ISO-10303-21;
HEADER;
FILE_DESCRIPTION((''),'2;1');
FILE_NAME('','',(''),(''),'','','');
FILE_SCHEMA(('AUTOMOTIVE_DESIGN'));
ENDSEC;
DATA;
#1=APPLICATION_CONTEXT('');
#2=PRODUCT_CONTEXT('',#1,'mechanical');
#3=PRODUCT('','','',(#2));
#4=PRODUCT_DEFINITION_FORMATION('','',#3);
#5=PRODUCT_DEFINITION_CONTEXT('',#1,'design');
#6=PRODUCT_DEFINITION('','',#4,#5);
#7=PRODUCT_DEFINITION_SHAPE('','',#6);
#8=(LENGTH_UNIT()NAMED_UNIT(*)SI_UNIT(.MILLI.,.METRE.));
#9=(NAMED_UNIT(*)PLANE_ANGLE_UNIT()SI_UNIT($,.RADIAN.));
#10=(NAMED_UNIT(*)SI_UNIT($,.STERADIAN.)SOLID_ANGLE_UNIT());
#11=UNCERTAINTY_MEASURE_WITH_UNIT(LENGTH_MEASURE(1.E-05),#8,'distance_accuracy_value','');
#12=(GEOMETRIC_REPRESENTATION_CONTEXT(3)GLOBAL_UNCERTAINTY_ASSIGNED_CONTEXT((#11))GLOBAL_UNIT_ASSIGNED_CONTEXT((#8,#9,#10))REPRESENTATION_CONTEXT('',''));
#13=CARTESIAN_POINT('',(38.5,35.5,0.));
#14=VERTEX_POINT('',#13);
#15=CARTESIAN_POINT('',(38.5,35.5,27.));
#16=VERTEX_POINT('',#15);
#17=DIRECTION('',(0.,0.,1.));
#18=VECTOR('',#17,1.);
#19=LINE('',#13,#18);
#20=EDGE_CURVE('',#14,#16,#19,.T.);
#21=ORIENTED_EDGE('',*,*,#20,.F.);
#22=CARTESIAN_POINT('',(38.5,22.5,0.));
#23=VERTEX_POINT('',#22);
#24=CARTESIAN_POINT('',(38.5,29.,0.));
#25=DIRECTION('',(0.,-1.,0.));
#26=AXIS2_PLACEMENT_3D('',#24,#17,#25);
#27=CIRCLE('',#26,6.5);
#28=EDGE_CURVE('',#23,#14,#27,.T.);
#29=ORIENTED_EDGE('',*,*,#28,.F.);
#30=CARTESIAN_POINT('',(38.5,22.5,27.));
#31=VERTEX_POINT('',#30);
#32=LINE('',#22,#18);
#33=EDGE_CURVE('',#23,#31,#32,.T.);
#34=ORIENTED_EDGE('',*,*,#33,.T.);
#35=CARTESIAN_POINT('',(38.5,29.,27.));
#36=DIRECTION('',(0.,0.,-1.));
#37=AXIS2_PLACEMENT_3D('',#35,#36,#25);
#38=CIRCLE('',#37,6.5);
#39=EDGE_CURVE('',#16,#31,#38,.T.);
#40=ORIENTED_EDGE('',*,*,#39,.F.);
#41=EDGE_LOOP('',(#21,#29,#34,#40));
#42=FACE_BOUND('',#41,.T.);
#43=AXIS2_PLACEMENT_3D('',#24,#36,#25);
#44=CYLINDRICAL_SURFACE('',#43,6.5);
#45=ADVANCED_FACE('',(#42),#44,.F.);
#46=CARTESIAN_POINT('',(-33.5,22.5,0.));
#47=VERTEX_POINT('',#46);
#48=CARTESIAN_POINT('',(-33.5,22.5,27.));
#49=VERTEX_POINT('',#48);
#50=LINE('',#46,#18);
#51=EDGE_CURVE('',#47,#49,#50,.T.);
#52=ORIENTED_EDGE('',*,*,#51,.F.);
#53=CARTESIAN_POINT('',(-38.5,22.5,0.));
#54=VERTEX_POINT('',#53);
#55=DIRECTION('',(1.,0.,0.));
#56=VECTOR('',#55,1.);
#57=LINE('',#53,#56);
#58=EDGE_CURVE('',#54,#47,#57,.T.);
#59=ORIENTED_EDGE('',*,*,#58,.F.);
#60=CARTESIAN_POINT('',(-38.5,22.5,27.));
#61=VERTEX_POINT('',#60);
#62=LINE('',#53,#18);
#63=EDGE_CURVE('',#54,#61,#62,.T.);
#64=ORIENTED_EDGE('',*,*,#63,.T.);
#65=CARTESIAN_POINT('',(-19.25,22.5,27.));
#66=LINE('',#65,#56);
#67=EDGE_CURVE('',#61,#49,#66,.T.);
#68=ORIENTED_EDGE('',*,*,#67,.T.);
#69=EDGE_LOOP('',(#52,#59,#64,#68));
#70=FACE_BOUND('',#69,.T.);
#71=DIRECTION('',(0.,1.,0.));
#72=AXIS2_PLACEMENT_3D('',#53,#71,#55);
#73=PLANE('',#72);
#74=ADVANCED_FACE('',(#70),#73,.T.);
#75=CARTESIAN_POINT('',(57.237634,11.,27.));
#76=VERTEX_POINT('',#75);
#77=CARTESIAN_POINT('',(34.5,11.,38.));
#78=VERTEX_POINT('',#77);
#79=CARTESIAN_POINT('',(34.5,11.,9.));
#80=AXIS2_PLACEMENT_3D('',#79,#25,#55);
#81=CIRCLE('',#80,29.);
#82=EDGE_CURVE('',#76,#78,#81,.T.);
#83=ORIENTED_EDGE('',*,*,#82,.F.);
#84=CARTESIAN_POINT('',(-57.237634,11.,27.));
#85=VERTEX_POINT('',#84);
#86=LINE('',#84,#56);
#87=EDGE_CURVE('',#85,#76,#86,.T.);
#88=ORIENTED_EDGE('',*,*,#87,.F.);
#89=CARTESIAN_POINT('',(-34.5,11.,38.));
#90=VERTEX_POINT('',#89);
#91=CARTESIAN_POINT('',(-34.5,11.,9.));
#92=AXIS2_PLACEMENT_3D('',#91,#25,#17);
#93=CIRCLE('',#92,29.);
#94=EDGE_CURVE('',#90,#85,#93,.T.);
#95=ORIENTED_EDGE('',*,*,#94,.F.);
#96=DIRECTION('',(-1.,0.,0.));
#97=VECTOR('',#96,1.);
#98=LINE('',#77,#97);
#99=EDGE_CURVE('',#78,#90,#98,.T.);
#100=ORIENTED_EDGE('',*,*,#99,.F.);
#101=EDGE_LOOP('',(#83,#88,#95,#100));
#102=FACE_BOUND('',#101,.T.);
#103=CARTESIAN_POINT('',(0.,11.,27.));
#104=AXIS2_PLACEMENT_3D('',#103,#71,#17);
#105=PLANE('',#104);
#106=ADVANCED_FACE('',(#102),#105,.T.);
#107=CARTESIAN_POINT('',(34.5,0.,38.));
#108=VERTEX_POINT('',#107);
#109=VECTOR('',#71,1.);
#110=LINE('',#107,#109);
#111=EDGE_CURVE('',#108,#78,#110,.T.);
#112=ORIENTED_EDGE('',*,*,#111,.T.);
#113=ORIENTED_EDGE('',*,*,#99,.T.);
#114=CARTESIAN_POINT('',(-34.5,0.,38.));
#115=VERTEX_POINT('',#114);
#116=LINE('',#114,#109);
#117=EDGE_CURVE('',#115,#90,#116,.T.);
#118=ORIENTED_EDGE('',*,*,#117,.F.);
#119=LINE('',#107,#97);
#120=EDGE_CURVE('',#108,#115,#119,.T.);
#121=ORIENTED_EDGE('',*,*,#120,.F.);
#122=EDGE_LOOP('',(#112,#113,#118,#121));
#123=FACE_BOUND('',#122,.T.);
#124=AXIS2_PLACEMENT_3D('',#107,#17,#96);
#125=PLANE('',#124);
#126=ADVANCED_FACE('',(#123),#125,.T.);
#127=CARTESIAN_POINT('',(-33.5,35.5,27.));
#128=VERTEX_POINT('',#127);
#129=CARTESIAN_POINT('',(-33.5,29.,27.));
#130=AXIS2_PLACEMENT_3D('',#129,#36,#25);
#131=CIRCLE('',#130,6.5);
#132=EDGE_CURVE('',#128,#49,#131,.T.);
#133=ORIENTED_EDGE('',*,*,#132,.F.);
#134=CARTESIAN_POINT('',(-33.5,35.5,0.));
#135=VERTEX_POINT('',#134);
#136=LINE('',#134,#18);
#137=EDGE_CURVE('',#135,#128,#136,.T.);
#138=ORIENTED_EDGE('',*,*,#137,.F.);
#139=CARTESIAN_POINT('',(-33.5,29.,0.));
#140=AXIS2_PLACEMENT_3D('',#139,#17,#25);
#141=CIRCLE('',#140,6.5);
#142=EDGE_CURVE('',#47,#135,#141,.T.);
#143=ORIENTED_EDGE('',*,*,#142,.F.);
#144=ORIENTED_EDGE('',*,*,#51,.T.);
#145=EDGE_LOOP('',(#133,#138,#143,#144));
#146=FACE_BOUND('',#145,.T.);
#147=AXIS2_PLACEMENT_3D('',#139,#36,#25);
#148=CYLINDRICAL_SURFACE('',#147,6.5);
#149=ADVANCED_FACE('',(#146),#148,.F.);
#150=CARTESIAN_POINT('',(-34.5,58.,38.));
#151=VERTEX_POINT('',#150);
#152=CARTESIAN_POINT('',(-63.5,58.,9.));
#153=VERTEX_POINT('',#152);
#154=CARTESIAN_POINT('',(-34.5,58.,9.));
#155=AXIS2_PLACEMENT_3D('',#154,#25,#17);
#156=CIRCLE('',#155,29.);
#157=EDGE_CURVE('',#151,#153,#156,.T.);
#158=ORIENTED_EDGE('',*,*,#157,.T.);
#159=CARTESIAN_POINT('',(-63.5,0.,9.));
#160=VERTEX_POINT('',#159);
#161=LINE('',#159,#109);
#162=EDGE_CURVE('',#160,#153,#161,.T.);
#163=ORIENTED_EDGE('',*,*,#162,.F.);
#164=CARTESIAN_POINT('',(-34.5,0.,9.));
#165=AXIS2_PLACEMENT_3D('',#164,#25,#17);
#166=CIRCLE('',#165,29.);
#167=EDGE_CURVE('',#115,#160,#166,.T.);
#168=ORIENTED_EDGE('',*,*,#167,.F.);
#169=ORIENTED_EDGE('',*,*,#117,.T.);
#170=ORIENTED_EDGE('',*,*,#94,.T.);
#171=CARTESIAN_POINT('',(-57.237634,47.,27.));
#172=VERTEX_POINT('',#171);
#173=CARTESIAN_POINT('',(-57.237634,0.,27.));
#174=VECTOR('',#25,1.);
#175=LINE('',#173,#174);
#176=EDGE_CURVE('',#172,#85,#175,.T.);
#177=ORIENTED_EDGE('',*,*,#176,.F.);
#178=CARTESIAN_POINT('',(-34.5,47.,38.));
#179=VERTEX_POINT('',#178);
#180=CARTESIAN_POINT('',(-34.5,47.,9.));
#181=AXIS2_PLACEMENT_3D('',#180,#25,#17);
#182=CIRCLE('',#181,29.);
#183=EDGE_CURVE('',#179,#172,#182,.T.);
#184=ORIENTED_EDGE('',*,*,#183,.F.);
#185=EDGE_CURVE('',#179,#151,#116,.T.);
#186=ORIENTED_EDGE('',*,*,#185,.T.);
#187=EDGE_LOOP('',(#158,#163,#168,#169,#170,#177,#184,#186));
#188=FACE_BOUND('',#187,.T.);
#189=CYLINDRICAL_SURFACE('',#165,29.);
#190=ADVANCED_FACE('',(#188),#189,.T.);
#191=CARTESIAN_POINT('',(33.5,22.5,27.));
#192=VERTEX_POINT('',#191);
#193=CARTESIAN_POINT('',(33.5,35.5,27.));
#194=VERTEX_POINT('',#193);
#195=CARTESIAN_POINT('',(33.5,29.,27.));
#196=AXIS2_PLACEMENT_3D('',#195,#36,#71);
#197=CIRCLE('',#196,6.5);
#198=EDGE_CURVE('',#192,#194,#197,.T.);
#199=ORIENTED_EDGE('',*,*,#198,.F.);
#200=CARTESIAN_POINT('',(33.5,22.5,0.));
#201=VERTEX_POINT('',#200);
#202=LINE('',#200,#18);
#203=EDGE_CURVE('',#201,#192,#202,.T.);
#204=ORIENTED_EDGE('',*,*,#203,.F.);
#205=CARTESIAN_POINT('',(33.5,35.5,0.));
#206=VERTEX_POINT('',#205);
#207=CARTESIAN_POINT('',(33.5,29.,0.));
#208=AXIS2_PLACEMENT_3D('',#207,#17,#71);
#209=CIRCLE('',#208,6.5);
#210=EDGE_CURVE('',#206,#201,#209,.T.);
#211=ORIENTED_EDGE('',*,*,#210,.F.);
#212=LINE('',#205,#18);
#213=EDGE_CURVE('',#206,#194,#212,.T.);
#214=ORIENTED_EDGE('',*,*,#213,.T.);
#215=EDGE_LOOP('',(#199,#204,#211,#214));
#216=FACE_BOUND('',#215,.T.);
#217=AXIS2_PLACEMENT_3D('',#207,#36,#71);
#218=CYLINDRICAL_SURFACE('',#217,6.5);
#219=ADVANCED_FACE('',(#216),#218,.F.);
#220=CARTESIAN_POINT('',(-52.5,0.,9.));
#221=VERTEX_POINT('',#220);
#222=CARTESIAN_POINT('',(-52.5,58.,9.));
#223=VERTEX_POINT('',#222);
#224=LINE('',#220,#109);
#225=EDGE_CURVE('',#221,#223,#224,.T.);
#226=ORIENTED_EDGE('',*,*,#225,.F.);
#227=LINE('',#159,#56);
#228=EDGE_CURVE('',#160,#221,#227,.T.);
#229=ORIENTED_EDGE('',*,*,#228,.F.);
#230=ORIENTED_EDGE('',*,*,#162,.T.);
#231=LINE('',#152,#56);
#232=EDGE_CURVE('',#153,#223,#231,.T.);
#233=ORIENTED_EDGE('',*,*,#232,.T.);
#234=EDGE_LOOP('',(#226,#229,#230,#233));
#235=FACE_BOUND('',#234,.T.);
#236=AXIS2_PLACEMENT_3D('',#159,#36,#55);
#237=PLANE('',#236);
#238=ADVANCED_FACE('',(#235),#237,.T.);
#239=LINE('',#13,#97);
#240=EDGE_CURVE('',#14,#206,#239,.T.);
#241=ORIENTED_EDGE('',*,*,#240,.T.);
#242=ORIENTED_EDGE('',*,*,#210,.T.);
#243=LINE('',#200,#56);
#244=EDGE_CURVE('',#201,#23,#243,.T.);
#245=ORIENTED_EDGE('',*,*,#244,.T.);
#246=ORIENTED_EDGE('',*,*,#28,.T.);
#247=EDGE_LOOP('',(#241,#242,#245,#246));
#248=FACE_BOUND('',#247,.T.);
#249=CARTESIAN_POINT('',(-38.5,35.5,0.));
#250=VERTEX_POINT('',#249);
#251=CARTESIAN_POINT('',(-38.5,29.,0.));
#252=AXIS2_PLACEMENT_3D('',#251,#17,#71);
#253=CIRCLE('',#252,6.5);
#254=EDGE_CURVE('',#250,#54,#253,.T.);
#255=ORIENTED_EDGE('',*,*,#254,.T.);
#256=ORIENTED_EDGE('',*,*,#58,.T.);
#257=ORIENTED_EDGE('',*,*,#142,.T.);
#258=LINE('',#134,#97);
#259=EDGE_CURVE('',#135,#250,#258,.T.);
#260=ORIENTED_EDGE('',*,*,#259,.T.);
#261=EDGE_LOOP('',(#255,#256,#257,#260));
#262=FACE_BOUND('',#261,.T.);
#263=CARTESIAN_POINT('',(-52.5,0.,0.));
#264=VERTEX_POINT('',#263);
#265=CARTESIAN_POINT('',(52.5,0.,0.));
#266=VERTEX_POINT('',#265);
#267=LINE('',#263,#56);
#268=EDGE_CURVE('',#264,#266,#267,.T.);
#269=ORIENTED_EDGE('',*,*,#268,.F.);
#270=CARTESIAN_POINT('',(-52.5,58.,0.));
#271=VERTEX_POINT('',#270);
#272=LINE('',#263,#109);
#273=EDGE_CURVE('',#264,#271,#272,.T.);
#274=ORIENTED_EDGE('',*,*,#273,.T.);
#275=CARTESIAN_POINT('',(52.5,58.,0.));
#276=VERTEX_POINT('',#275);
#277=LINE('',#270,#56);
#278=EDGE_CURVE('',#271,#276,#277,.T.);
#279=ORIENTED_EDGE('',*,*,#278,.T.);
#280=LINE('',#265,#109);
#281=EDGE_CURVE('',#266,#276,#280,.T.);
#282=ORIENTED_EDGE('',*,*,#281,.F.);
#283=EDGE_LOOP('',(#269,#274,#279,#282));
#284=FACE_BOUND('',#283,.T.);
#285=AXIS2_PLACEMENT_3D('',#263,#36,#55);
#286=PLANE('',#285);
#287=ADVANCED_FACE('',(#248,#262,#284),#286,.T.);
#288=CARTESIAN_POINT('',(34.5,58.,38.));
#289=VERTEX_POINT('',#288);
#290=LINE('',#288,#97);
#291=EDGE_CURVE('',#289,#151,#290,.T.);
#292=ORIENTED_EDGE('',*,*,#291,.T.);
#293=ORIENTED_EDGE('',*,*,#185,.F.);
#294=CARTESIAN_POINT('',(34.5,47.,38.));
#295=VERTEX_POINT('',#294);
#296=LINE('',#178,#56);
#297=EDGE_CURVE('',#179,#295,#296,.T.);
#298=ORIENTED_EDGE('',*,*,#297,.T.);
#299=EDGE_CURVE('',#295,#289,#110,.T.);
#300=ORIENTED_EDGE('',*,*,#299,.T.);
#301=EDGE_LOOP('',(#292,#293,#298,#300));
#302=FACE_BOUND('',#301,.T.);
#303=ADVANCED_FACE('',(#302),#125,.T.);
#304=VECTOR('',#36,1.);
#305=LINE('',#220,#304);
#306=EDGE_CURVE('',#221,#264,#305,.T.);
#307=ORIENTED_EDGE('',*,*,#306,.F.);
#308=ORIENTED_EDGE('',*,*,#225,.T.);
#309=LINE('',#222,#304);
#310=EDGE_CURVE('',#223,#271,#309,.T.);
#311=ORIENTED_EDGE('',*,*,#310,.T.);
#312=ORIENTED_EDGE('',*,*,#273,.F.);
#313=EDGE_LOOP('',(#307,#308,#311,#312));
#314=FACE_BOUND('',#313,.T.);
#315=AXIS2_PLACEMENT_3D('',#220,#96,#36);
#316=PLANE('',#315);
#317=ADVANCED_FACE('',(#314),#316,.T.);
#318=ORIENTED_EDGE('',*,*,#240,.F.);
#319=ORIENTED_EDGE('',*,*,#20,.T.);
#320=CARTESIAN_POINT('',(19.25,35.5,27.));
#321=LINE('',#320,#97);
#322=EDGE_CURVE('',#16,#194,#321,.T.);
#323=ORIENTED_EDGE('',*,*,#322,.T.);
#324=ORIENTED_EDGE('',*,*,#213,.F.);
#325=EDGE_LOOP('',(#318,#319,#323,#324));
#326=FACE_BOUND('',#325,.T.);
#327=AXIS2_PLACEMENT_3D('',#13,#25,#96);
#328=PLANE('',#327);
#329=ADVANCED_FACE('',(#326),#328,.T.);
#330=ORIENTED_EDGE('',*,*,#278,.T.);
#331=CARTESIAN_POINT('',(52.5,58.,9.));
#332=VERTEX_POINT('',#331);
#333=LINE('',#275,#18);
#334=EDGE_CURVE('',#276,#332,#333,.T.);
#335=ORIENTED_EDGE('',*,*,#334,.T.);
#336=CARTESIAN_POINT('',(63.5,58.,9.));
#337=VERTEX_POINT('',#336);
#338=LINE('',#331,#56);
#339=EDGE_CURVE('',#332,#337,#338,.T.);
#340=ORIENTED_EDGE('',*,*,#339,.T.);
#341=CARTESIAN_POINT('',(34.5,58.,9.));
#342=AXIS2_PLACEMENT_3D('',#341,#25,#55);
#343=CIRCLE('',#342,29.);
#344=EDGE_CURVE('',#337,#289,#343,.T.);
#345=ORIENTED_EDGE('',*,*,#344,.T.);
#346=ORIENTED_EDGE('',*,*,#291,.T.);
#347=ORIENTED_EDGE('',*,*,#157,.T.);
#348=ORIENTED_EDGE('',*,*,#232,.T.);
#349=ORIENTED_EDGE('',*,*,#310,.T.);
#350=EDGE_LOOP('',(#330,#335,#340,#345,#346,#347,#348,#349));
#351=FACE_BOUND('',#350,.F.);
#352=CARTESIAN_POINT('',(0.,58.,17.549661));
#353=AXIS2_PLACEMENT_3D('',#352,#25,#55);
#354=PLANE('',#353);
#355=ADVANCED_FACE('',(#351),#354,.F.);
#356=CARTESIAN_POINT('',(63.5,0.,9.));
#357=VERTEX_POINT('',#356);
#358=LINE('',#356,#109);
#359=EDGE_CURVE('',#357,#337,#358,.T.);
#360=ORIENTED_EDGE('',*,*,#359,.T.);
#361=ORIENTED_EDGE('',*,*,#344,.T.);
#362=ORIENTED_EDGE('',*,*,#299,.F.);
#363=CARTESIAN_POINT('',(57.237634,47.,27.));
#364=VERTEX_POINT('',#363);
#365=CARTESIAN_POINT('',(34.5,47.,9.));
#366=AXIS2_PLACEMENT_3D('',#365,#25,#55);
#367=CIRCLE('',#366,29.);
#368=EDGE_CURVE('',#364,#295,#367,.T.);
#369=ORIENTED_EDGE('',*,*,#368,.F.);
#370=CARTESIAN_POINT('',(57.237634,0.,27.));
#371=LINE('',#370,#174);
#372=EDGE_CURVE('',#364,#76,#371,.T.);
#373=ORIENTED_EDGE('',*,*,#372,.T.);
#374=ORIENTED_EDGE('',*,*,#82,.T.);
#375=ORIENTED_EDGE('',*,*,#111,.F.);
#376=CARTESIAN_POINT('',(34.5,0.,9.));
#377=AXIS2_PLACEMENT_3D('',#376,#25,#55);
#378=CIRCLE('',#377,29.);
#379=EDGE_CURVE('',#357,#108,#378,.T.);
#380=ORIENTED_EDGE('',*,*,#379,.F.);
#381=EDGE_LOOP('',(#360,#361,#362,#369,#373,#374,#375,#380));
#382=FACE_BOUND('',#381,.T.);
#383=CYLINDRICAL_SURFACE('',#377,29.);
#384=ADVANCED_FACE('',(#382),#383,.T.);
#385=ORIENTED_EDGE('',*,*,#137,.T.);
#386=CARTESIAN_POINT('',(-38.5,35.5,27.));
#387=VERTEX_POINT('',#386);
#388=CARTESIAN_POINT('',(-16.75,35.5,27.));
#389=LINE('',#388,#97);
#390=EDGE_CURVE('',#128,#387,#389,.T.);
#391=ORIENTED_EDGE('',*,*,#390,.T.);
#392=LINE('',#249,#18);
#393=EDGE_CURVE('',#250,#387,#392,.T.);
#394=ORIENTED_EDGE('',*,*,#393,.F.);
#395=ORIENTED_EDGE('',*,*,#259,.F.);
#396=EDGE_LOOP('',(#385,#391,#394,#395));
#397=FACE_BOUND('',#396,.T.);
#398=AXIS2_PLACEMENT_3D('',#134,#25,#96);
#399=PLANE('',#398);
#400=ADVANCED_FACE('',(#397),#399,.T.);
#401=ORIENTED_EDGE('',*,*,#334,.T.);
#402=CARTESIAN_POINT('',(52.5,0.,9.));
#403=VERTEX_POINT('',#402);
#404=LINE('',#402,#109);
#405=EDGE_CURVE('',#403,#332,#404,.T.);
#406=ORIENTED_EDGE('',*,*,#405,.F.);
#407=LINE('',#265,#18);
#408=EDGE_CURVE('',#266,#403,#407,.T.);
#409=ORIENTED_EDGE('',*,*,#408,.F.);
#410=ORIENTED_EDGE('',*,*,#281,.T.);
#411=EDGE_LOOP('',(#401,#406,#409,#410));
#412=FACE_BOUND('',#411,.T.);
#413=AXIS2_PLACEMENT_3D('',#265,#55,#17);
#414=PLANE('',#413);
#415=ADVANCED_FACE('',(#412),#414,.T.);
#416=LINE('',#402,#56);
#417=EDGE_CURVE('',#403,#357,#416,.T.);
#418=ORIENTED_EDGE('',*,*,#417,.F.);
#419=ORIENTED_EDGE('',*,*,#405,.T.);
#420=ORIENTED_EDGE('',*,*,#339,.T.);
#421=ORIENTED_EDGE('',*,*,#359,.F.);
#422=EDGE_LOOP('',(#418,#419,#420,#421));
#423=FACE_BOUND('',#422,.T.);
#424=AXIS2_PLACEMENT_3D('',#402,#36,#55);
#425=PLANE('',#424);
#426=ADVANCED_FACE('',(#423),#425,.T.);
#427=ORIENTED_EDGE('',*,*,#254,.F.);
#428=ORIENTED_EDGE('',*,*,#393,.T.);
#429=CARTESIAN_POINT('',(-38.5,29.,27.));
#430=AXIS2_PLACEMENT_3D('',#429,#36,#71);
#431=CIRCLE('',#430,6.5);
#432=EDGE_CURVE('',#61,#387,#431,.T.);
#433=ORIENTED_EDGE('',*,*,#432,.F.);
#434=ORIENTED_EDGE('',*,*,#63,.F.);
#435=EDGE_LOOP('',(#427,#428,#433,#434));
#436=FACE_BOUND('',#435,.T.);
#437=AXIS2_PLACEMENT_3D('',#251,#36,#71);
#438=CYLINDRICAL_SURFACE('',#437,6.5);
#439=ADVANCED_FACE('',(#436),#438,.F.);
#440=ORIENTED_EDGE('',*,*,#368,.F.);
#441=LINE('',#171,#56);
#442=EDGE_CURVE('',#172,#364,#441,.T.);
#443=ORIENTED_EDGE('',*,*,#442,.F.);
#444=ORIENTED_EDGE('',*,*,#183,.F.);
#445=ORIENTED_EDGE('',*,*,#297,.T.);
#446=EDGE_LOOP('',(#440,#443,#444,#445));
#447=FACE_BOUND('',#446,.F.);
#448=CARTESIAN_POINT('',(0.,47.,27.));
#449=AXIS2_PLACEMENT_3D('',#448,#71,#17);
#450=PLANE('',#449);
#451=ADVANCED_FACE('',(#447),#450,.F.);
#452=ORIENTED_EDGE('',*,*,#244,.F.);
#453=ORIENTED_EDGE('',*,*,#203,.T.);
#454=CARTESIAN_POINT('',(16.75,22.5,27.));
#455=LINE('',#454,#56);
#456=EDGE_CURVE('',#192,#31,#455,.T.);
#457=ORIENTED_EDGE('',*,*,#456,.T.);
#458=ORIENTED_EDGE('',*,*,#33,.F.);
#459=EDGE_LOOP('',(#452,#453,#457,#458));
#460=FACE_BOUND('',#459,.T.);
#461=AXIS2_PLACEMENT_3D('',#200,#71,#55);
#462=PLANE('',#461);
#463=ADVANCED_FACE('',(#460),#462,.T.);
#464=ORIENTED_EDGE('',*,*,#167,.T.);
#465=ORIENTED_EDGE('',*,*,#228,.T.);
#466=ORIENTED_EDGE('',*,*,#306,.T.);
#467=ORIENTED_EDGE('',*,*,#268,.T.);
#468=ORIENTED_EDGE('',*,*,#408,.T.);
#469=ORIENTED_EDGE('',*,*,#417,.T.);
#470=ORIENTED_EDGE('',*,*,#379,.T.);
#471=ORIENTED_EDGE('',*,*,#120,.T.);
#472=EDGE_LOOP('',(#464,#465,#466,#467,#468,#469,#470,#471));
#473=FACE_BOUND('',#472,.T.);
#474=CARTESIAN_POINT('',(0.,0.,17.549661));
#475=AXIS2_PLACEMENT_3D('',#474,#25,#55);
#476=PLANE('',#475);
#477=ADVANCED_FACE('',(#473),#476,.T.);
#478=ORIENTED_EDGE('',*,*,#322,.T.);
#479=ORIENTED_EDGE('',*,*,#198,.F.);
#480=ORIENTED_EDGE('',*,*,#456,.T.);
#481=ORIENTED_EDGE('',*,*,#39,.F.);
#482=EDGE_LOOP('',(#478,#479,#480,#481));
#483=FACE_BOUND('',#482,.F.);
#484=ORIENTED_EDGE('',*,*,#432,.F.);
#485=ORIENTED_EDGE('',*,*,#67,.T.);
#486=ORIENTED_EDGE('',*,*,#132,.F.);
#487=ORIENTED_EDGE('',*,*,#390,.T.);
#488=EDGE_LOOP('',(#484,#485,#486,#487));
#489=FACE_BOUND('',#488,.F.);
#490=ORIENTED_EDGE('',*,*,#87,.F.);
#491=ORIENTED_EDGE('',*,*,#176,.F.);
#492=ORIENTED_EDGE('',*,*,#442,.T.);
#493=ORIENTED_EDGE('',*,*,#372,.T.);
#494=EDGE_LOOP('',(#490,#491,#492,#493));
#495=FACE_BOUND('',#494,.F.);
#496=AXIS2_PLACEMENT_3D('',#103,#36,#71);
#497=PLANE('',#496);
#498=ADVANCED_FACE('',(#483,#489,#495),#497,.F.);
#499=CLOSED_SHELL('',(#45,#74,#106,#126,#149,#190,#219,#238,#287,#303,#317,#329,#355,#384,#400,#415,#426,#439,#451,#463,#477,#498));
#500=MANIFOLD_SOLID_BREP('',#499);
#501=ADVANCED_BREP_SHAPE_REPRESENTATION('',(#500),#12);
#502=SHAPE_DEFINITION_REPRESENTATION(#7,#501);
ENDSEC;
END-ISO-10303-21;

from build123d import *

# Parameters (mm, degrees)
F1_DEPTH      = 58
F2_W          = 36
F2_H          = 11
F3_DEPTH      = 63.501
F3_DEPTH_BACK = 63.501
F5_DEPTH      = 38.001


with BuildPart() as f1:
    # F0 (on Front) → F1 (new body)
    with BuildSketch(Plane.XZ):
        with BuildLine():
            Line((-52.5, 9), (-52.5, 0))
            Line((-52.5, 0), (52.5, 0))
            Line((52.5, 0), (52.5, 9))
            Line((52.5, 9), (63.5, 9))
            ThreePointArc((63.5, 9), (55.0060966544, 29.5060966544), (34.5, 38))
            Line((34.5, 38), (-34.5, 38))
            ThreePointArc((-34.5, 38), (-55.0060966544, 29.5060966544), (-63.5, 9))
            Line((-63.5, 9), (-52.5, 9))
        make_face()
    extrude(amount=-F1_DEPTH)

    # F2 (on Right) → F3 (cut, two sides)
    with BuildSketch(Plane.YZ) as f3_sk:
        with Locations((29, 32.5)):
            Rectangle(F2_W, F2_H)
    extrude(amount=-F3_DEPTH, mode=Mode.SUBTRACT)
    extrude(f3_sk.sketch, amount=F3_DEPTH_BACK, mode=Mode.SUBTRACT)

    # F4 (on Top) → F5 (cut, through all)
    with BuildSketch(Plane.XY):
        with BuildLine():
            Line((-33.5, 35.5), (-38.5, 35.5))
            ThreePointArc((-38.5, 35.5), (-45, 29), (-38.5, 22.5))
            Line((-38.5, 22.5), (-33.5, 22.5))
            ThreePointArc((-33.5, 22.5), (-27, 29), (-33.5, 35.5))
        make_face()
        with BuildLine():
            Line((38.5, 35.5), (33.5, 35.5))
            ThreePointArc((33.5, 35.5), (27, 29), (33.5, 22.5))
            Line((33.5, 22.5), (38.5, 22.5))
            ThreePointArc((38.5, 22.5), (45, 29), (38.5, 35.5))
        make_face()
    extrude(amount=F5_DEPTH, mode=Mode.SUBTRACT)


solid = f1.part
